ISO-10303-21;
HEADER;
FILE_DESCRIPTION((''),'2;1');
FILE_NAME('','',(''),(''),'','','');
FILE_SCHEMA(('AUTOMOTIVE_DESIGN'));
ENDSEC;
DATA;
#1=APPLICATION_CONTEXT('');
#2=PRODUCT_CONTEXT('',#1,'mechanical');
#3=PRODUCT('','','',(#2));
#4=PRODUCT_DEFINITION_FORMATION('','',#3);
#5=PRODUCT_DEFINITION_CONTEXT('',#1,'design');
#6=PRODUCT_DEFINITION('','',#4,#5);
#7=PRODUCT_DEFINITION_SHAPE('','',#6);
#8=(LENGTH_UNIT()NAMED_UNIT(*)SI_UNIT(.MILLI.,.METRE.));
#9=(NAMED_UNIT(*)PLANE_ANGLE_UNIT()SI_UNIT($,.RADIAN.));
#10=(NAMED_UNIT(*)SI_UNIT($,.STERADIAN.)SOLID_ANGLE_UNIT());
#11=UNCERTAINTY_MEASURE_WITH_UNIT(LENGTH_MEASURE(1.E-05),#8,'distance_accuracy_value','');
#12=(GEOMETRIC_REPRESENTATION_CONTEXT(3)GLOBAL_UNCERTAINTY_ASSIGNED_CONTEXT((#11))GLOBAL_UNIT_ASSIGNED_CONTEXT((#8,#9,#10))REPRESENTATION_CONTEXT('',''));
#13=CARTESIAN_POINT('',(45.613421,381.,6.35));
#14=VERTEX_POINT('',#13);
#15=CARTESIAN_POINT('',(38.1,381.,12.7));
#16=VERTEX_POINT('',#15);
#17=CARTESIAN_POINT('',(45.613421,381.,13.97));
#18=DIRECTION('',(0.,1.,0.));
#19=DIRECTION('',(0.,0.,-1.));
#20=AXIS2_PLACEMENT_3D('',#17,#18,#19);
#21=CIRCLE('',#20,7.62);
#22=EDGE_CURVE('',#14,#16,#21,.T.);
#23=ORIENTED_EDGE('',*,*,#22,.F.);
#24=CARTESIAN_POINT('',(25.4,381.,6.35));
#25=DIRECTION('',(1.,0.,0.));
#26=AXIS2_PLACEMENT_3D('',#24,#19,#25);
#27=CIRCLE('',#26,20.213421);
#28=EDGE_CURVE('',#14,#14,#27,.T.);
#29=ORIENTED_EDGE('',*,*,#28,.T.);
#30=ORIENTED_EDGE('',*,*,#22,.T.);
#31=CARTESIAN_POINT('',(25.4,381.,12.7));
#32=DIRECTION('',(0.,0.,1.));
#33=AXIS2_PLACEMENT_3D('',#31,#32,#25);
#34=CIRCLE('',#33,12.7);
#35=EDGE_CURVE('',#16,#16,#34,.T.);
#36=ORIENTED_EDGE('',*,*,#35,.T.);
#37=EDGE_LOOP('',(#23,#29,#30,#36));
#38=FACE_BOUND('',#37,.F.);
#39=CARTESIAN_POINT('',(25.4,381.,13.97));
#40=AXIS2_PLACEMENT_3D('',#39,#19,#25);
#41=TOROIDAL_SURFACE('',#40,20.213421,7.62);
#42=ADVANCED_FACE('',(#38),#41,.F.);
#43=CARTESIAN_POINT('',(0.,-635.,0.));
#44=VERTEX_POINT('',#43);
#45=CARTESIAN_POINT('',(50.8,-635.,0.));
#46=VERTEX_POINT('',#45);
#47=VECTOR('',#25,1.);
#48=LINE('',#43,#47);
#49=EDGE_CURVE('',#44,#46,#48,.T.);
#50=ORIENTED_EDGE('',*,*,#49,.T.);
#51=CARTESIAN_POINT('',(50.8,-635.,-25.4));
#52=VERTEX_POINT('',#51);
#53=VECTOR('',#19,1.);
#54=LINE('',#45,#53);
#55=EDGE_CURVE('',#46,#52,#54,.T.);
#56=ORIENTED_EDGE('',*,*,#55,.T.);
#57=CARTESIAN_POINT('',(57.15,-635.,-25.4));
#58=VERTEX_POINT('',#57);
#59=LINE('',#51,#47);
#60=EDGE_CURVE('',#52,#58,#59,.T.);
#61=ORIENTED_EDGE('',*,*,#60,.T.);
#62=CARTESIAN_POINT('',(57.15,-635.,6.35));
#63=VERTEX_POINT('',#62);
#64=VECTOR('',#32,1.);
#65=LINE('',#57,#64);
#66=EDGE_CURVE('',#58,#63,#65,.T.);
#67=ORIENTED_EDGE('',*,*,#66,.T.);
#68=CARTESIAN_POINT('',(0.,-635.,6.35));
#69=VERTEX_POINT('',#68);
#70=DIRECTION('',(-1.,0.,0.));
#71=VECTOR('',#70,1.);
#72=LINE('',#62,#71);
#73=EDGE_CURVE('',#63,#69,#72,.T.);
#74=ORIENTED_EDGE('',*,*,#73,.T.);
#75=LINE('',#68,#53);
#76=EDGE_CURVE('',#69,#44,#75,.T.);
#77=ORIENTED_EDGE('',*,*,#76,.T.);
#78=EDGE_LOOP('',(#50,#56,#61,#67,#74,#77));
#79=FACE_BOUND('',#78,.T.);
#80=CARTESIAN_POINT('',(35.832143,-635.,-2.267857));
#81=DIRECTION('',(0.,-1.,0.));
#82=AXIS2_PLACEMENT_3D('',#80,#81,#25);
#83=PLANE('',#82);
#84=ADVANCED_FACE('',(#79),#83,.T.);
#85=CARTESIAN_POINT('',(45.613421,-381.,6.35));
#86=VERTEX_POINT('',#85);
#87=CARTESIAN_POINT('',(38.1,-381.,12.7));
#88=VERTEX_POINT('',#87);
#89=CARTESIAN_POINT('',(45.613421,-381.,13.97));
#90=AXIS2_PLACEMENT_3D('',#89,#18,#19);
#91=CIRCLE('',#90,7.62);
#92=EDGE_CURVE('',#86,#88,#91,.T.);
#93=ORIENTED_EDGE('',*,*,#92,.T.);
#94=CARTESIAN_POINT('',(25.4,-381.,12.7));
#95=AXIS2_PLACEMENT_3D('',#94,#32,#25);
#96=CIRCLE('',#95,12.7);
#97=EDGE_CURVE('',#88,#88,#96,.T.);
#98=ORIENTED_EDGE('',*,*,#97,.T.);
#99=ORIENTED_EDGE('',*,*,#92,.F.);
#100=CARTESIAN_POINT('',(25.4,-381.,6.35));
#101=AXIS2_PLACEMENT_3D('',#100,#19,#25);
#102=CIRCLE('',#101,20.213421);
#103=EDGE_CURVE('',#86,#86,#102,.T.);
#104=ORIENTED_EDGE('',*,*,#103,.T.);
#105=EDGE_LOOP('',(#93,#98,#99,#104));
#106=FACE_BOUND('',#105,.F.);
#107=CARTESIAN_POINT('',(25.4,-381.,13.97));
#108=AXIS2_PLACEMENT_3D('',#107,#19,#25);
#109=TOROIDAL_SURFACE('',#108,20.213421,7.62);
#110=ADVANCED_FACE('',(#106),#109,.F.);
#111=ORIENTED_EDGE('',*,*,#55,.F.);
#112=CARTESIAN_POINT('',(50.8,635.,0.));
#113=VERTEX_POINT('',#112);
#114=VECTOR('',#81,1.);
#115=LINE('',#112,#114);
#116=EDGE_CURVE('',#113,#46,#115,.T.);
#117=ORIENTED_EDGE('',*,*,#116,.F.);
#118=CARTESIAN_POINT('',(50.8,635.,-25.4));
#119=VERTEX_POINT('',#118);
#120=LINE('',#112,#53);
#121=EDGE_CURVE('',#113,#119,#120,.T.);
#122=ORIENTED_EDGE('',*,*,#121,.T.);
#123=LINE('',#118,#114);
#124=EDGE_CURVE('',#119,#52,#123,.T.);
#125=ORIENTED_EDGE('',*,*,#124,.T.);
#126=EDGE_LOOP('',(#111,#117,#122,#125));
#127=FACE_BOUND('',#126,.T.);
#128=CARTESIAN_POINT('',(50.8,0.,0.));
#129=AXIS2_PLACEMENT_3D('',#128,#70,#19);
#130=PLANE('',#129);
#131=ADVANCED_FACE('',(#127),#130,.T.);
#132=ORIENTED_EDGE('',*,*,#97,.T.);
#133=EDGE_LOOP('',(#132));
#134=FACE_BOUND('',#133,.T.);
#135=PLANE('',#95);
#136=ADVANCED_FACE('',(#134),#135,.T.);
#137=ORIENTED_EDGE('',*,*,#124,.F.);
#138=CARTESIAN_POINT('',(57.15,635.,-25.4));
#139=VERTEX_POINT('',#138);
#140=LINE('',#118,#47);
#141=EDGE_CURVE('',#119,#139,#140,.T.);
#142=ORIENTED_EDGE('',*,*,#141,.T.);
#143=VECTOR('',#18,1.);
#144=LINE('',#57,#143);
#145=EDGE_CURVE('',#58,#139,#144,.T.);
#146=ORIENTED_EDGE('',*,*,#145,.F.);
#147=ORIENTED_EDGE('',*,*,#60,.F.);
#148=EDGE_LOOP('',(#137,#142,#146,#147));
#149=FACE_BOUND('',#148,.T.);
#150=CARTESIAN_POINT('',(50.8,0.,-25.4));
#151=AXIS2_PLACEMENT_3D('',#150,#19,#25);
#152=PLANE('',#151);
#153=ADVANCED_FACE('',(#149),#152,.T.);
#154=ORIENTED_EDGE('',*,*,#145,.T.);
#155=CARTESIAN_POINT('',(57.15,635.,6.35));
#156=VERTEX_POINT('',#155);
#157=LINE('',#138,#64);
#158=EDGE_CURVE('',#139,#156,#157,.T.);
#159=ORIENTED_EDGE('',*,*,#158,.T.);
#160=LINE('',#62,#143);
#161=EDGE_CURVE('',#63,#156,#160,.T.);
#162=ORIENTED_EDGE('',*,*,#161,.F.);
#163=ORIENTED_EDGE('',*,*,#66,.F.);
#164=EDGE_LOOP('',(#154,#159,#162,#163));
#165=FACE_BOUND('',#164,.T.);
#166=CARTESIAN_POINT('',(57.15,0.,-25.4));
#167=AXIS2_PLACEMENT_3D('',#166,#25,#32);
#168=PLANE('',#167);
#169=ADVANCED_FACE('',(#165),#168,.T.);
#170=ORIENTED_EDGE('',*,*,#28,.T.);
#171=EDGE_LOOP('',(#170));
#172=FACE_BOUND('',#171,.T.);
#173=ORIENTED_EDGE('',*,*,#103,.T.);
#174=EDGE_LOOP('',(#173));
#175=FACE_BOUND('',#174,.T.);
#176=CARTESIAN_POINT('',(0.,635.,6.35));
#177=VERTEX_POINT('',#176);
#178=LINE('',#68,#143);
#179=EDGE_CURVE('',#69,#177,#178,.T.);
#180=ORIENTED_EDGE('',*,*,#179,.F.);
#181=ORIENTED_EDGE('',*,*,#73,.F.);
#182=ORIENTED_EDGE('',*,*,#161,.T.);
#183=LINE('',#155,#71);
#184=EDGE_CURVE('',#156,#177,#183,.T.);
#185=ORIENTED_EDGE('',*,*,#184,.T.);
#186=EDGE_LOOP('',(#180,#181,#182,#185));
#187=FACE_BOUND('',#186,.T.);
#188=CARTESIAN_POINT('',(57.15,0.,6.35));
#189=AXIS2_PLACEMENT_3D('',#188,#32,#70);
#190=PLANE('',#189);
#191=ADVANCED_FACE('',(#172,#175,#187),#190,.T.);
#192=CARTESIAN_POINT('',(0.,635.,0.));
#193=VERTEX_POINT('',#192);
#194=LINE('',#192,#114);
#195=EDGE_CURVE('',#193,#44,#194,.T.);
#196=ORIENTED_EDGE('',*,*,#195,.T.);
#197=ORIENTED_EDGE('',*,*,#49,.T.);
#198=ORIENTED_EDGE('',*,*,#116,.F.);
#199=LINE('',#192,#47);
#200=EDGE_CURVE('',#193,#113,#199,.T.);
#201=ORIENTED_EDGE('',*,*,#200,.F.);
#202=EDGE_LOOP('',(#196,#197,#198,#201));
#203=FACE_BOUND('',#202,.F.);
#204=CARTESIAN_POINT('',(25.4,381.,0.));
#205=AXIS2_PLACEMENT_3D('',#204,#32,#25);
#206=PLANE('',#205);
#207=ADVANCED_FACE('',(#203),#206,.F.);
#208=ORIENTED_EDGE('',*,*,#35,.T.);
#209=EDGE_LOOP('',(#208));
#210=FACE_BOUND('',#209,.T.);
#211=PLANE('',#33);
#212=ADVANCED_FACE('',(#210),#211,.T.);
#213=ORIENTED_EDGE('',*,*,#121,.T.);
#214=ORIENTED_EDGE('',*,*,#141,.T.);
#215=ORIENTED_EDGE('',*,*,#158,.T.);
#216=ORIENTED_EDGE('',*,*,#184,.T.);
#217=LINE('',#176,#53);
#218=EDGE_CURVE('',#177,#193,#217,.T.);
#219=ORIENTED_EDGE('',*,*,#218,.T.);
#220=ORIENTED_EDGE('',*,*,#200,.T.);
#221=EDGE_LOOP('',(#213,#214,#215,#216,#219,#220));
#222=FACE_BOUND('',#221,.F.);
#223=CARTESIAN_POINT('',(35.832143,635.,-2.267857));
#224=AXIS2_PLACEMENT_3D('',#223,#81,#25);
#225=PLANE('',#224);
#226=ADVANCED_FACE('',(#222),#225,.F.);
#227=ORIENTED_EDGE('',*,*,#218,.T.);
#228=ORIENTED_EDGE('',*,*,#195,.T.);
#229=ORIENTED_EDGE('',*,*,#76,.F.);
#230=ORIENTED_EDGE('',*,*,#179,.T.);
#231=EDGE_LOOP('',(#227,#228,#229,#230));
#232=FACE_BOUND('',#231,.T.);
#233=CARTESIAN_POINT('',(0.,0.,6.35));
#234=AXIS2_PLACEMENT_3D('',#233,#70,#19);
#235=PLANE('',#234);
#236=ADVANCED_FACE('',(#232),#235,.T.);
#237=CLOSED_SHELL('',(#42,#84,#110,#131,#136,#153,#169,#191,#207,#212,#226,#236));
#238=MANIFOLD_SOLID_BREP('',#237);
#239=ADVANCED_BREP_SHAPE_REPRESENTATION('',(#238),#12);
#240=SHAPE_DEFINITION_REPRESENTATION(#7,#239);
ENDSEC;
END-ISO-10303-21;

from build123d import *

# Parameters (mm, degrees)
F1_DEPTH = 635
F2_R     = 12.7
F3_DEPTH = 12.7


# Not quite as in the source:
# - a fillet or chamfer that OpenCascade refuses, or shapes differently, is made with other operations: its cross-section is extruded or revolved along the edge and cut away or added


with BuildPart() as f1:
    # F0 (on Front) → F1 (new body, symmetric)
    with BuildSketch(Plane.XZ):
        Polygon((0, 6.35), (0, 0), (50.8, 0), (50.8, -25.4), (57.15, -25.4), (57.15, 6.35), align=None)
    extrude(amount=F1_DEPTH, both=True)

    # F2 (on Top) → F3 (join)
    with BuildSketch(Plane.XY):
        with Locations((25.4, 381)):
            Circle(F2_R)
        with Locations((25.4, -381)):
            Circle(F2_R)
    extrude(amount=F3_DEPTH)

    # F4: fillet of radius 7.62 on 1 edges, made by hand

    # F4_s1 → F4_t2 (revolve)
    with BuildSketch(Plane.XZ.offset(-381)):
        with BuildLine():
            ThreePointArc((45.6134213245, 6.35), (40.6947324749, 8.1501288674), (38.1, 12.7))
            Line((38.1, 12.7), (38.1, 6.35))
            Line((38.1, 6.35), (45.6134213245, 6.35))
        make_face()
    revolve(axis=Axis((25.4, 381, 6.35), (0, 0, -1)))

    # F5: fillet of radius 7.62 on 1 edges, made by hand

    # F5_s1 → F5_t2 (revolve)
    with BuildSketch(Plane.XZ.offset(381)):
        with BuildLine():
            ThreePointArc((45.6134213245, 6.35), (40.6947324749, 8.1501288674), (38.1, 12.7))
            Line((38.1, 12.7), (38.1, 6.35))
            Line((38.1, 6.35), (45.6134213245, 6.35))
        make_face()
    revolve(axis=Axis((25.4, -381, 6.35), (0, 0, -1)))


solid = f1.part
